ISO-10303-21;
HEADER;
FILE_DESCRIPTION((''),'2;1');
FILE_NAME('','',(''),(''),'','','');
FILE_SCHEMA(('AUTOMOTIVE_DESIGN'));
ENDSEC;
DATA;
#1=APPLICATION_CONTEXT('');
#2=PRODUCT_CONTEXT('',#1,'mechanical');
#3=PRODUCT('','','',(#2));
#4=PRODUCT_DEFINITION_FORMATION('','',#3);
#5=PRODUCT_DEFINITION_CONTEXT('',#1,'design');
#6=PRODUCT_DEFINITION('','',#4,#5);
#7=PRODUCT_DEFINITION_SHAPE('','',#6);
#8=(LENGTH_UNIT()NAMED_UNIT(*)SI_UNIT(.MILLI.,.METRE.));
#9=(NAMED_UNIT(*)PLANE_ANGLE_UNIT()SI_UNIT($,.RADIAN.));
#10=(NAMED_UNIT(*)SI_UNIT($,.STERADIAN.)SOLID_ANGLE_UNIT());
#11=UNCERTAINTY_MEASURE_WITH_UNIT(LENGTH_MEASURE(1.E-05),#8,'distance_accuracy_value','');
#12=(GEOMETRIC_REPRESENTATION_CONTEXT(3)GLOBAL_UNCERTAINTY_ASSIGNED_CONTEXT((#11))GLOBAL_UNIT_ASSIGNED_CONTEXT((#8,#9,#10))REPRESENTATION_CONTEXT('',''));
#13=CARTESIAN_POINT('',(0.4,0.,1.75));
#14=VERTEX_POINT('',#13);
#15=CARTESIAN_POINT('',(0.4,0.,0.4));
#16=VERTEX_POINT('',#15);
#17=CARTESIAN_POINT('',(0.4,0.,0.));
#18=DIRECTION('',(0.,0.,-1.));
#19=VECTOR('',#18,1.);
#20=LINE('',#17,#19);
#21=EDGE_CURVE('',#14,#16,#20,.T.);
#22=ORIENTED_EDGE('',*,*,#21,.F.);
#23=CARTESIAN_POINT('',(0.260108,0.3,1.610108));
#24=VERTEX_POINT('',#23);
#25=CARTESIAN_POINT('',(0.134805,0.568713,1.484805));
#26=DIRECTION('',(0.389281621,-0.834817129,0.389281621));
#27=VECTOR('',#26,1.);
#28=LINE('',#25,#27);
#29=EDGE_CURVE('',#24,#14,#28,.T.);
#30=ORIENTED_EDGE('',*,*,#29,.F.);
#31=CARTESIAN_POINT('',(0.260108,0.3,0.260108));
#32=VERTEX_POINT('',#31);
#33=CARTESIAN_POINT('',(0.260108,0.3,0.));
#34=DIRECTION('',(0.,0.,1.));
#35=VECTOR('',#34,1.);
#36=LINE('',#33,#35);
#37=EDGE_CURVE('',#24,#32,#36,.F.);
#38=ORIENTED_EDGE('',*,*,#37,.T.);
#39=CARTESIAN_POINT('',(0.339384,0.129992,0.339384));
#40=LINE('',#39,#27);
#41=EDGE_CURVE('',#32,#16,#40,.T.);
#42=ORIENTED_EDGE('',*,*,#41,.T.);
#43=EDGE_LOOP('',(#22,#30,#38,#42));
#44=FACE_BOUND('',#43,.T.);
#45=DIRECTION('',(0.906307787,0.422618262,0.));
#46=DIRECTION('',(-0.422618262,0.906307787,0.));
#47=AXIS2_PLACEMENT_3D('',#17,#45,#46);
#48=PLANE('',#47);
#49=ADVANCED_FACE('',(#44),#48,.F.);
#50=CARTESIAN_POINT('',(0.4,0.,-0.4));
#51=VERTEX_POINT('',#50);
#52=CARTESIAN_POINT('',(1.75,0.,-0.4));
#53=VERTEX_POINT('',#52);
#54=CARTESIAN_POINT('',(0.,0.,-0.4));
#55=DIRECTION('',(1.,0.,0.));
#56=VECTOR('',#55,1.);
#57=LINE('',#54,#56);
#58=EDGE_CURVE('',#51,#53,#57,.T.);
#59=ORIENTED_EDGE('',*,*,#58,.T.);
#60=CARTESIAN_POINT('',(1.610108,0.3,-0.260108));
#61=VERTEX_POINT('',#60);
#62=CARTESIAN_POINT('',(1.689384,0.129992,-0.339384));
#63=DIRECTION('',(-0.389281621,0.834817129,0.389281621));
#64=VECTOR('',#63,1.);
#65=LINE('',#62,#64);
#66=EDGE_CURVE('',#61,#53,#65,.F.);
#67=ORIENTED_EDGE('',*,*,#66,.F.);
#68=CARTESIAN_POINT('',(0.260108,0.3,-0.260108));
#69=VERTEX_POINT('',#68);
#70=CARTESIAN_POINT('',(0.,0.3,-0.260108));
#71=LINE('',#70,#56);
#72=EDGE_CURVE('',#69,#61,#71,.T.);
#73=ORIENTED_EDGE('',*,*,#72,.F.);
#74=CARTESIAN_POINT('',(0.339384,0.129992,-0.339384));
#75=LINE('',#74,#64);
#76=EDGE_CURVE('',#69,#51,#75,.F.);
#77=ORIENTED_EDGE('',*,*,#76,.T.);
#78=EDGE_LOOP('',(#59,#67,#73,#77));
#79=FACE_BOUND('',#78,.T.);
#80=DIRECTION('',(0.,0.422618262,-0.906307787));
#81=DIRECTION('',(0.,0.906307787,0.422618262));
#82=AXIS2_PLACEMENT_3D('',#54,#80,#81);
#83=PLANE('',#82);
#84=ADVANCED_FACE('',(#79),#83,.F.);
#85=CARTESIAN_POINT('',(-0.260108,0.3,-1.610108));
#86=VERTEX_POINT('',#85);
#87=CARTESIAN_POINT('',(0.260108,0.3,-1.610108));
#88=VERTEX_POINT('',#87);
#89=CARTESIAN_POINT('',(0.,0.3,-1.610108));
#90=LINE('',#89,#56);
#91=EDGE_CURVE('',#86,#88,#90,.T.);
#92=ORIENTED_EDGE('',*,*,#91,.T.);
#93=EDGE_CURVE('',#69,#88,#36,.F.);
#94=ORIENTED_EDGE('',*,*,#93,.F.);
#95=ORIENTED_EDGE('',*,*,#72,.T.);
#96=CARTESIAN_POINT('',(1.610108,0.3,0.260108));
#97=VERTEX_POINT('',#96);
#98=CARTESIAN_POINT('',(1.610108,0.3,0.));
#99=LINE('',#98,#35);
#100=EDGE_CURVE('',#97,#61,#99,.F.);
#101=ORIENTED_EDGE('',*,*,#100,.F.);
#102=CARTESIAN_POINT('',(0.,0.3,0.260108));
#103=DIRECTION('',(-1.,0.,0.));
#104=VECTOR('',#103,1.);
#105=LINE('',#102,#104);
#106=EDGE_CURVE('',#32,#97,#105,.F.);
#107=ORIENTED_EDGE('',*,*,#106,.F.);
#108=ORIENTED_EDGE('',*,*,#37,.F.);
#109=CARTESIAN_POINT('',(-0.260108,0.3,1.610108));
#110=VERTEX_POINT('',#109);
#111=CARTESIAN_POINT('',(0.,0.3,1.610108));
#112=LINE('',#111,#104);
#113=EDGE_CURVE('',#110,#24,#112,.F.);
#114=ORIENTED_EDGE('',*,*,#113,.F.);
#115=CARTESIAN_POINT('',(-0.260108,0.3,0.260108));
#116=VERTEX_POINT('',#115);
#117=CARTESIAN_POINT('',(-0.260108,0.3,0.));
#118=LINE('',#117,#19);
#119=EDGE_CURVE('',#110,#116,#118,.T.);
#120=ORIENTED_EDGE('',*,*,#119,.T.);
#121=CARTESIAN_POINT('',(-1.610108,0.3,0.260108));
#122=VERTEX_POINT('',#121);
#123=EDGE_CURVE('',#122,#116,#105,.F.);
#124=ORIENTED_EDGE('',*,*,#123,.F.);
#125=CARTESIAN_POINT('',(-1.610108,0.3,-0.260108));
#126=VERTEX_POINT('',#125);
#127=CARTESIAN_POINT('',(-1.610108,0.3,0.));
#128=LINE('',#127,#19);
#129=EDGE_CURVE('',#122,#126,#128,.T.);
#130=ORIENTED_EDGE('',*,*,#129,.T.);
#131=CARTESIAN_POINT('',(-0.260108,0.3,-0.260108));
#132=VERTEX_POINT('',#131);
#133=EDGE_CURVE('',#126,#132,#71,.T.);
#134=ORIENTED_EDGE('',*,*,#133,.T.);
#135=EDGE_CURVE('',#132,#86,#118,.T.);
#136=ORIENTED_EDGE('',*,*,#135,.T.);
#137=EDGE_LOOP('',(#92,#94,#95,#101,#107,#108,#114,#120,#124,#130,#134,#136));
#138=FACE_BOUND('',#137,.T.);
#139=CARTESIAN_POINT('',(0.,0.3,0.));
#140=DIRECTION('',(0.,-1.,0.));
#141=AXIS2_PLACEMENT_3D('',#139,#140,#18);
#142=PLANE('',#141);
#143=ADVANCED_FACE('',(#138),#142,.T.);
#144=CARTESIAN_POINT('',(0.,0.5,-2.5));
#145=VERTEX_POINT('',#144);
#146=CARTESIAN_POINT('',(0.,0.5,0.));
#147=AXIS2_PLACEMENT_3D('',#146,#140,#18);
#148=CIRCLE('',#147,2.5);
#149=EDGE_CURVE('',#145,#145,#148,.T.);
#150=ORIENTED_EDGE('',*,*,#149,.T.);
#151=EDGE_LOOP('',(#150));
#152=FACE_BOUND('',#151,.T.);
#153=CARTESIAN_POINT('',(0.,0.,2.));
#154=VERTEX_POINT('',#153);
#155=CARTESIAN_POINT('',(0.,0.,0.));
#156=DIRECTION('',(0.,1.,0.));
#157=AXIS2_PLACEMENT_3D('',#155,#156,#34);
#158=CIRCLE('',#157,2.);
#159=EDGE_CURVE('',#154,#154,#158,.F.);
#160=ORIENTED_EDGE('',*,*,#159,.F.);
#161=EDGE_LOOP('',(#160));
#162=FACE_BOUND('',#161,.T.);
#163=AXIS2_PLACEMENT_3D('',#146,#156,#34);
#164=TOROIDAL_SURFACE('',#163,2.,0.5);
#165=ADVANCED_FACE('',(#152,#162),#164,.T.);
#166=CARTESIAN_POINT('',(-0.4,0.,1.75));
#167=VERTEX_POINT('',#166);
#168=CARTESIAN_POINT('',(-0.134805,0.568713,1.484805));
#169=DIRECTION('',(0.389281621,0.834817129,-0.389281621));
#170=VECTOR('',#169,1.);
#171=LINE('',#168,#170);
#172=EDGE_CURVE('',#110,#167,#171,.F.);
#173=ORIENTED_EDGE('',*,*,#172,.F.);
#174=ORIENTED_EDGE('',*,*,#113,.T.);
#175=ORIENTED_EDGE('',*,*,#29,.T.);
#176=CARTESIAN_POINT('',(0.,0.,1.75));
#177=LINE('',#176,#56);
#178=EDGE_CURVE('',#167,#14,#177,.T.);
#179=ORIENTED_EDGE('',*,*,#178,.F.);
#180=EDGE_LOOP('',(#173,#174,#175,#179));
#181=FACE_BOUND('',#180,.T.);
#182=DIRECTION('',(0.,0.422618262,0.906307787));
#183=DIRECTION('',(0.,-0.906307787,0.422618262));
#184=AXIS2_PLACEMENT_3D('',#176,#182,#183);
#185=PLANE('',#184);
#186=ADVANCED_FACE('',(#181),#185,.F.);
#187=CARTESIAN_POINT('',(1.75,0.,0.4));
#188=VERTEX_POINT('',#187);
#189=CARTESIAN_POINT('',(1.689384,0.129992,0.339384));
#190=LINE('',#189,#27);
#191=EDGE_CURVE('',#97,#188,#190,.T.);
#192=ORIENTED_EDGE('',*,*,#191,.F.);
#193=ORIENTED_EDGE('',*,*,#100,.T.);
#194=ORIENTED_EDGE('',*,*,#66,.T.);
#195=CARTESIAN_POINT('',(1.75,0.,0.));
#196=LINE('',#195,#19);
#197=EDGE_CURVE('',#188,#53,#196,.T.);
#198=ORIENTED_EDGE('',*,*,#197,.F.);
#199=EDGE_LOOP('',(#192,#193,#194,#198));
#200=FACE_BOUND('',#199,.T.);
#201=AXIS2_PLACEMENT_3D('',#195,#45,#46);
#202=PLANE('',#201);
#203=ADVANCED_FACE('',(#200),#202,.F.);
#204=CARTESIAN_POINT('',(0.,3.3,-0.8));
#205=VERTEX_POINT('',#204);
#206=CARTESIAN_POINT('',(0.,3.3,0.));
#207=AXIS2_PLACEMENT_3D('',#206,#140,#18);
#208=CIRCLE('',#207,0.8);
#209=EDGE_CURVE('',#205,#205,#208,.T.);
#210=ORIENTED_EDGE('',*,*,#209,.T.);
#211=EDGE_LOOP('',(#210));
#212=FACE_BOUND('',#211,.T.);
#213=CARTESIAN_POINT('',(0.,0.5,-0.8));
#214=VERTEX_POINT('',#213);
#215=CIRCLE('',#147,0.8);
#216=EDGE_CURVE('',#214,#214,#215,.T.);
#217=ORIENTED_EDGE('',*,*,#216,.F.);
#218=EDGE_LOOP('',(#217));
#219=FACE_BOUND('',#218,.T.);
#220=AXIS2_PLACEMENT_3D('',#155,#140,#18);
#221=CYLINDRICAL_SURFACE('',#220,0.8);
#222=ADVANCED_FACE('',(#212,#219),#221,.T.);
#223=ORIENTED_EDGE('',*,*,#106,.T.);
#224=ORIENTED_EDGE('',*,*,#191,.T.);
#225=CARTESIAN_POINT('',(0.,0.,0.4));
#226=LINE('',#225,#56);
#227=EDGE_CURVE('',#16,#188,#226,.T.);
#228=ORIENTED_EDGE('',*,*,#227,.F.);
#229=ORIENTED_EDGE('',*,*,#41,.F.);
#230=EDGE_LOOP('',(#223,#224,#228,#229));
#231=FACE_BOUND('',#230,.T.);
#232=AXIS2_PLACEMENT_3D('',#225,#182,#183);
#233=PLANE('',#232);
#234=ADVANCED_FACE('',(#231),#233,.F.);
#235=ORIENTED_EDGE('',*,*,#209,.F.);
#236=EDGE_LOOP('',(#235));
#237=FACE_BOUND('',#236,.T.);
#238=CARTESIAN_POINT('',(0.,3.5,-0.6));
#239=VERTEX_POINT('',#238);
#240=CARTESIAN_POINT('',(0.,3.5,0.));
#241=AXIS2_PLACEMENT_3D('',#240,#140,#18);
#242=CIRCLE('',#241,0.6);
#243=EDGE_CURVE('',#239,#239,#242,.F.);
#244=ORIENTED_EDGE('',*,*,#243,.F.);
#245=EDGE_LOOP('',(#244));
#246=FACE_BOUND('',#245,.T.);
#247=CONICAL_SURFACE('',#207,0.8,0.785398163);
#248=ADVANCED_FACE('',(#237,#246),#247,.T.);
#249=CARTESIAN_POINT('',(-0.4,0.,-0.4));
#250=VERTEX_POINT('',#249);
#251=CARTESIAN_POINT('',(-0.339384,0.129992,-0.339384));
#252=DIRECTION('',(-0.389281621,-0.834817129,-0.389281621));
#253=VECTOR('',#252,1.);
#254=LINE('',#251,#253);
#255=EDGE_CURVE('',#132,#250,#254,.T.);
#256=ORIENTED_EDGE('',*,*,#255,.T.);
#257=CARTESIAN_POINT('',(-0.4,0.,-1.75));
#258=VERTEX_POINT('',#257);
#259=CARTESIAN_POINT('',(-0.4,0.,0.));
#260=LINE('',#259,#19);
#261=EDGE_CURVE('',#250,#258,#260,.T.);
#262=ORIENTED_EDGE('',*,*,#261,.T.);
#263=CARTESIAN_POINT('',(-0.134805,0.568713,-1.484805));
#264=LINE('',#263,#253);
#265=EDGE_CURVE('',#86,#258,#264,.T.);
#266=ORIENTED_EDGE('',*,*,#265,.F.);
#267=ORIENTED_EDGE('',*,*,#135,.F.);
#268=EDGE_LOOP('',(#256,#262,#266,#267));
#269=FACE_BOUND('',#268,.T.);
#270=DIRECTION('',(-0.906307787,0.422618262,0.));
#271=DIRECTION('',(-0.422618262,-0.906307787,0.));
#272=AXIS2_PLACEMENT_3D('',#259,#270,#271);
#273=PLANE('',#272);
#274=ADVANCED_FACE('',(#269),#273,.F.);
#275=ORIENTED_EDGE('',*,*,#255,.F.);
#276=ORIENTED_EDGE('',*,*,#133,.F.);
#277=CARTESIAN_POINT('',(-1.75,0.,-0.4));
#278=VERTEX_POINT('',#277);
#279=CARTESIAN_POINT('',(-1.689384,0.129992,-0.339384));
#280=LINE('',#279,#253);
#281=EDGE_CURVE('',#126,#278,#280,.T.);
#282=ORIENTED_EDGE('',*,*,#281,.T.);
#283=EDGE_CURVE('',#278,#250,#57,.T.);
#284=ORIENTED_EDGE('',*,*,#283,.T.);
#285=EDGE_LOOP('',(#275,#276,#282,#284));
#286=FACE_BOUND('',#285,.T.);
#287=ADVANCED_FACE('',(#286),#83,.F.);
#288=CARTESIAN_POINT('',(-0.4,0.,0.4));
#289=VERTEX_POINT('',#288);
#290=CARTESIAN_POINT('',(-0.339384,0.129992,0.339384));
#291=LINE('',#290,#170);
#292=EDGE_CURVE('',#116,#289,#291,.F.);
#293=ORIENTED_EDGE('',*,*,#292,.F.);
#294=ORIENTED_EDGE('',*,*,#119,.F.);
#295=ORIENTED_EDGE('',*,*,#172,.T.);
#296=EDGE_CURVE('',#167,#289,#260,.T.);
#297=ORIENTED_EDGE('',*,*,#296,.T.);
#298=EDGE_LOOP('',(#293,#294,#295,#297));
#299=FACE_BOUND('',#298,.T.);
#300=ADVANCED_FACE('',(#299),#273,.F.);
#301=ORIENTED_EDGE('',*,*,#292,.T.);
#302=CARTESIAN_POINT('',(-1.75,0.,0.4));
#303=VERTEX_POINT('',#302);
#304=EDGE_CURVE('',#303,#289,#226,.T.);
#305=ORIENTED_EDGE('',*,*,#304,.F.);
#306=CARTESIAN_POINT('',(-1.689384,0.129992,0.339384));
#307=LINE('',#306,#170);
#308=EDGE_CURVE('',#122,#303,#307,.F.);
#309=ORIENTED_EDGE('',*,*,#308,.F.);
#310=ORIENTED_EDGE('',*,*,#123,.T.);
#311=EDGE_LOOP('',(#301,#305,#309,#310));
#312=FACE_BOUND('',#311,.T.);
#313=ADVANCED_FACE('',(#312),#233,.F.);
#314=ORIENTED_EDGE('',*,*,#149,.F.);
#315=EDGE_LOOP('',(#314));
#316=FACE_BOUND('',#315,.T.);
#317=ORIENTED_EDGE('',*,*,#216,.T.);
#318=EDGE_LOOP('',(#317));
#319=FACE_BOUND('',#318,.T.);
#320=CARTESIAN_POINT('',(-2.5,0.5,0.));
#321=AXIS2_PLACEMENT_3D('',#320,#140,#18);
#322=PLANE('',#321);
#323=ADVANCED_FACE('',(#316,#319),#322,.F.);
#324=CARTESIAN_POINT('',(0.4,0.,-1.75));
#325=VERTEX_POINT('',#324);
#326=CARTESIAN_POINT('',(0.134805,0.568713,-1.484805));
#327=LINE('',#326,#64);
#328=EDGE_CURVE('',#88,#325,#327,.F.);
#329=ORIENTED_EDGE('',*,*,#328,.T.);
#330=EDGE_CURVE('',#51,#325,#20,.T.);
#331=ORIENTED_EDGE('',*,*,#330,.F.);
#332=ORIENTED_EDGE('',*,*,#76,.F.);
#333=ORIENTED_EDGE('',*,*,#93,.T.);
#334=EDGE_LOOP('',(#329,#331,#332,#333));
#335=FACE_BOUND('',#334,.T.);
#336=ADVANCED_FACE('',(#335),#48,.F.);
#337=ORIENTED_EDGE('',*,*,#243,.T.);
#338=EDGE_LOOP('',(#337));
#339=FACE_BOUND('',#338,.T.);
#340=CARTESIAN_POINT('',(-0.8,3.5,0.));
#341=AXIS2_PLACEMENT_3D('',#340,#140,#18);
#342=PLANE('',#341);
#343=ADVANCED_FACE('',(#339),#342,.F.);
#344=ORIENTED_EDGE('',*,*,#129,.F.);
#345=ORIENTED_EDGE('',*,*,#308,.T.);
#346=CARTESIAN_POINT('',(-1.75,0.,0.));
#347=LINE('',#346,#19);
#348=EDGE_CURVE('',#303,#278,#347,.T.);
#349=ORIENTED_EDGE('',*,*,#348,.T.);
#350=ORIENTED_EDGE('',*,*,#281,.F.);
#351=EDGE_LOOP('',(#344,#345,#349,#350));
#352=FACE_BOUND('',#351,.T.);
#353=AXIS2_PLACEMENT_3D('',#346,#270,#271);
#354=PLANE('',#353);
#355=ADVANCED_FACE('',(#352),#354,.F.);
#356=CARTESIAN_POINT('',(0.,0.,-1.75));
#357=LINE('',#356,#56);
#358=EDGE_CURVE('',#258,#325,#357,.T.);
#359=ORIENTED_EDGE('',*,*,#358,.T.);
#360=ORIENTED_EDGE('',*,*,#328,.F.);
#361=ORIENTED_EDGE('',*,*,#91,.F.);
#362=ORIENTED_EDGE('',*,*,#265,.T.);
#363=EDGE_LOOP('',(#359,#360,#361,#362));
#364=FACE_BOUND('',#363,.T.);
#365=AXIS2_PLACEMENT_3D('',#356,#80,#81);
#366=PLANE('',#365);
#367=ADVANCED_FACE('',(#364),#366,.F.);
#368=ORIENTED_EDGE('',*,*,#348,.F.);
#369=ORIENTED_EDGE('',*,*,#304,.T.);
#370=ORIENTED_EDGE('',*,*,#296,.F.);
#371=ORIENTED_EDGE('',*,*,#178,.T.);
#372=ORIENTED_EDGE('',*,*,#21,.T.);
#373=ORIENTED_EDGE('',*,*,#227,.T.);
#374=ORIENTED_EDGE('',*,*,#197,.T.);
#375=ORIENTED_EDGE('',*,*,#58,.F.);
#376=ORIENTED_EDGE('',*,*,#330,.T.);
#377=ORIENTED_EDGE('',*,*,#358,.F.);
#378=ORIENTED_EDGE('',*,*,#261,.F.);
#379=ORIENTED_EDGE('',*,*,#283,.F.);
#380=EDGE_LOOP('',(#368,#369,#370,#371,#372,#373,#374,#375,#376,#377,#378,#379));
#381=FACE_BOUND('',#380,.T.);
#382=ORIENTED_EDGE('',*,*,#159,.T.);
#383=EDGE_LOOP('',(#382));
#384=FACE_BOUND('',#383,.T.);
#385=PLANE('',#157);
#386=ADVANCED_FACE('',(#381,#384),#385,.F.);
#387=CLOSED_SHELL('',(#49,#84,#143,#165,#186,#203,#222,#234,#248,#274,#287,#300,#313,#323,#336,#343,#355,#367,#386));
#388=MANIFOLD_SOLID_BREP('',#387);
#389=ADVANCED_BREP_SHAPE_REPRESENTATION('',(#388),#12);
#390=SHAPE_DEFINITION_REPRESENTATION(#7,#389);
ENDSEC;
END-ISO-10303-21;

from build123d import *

# Parameters (mm, degrees)
CHAMFER_1_SIZE                = 0.2
FILLET_1_R                    = 0.5
SKETCH_2_W                    = 0.8
SKETCH_2_H                    = 3.5
CUT_EXTRUDE_1_DEPTH           = 0.3
CUT_EXTRUDE_1_DRAFT           = -25
SKETCH_2_W_2                  = 3.5
SKETCH_2_H_2                  = 0.8
CUT_EXTRUDE_1_PROFILE_2_DEPTH = 0.3
CUT_EXTRUDE_1_PROFILE_2_DRAFT = -25


with BuildPart() as part:
    # 草图1 → 旋转1 (revolve)
    with BuildSketch(Plane.XY, mode=Mode.PRIVATE) as revolve_1_sk:
        Polygon((0, 0), (-2.5, 0), (-2.5, 0.5), (-0.8, 0.5), (-0.8, 3.5), (0, 3.5), align=None)
    revolve(revolve_1_sk.sketch.rotate(Axis((0, 0, 0), (0, 1, 0)), 270), axis=Axis((0, 0, 0), (0, 1, 0)))

    # 倒角1
    chamfer_1_edges = [part.edges().sort_by_distance(p)[0] for p in [
        (0, 3.5, 0.8),
    ]]
    chamfer(chamfer_1_edges, length=CHAMFER_1_SIZE)

    # 圆角1
    fillet_1_edges = [part.edges().sort_by_distance(p)[0] for p in [
        (0, 0, 2.5),
    ]]
    fillet(fillet_1_edges, radius=FILLET_1_R - 0.0001)  # a hair under: the kernel refuses the full size


with BuildPart() as cut_extrude_1_tool:
    # 草图2 → 切除-拉伸1 (with draft: the straight prism first)
    with BuildSketch(Plane.XZ):
        Rectangle(SKETCH_2_W, SKETCH_2_H)
    extrude(amount=-CUT_EXTRUDE_1_DEPTH)
    # 切除-拉伸1: the draft: its side faces are tilted about the plane it starts from
    cut_extrude_1_sides = [cut_extrude_1_tool.faces().sort_by_distance(p)[0] for p in [
        (-0.4, 0.15, 0),
        (0, 0.15, -1.75),
        (0.4, 0.15, 0),
        (0, 0.15, 1.75),
    ]]
    draft(cut_extrude_1_sides, Plane.XZ, CUT_EXTRUDE_1_DRAFT)


with BuildPart() as part_1:
    add(part.part)

    # 切除-拉伸1: cut by cut_extrude_1_tool
    add(cut_extrude_1_tool.part, mode=Mode.SUBTRACT)


with BuildPart() as cut_extrude_1_profile_2_tool:
    # 草图2 → 切除-拉伸1 profile 2 (with draft: the straight prism first)
    with BuildSketch(Plane.XZ):
        Rectangle(SKETCH_2_W_2, SKETCH_2_H_2)
    extrude(amount=-CUT_EXTRUDE_1_PROFILE_2_DEPTH)
    # 切除-拉伸1 profile 2: the draft: its side faces are tilted about the plane it starts from
    cut_extrude_1_profile_2_sides = [cut_extrude_1_profile_2_tool.faces().sort_by_distance(p)[0] for p in [
        (-1.75, 0.15, 0),
        (0, 0.15, -0.4),
        (1.75, 0.15, 0),
        (0, 0.15, 0.4),
    ]]
    draft(cut_extrude_1_profile_2_sides, Plane.XZ, CUT_EXTRUDE_1_PROFILE_2_DRAFT)


with BuildPart() as part_2:
    add(part_1.part)

    # 切除-拉伸1 profile 2: cut by cut_extrude_1_profile_2_tool
    add(cut_extrude_1_profile_2_tool.part, mode=Mode.SUBTRACT)


solid = part_2.part
